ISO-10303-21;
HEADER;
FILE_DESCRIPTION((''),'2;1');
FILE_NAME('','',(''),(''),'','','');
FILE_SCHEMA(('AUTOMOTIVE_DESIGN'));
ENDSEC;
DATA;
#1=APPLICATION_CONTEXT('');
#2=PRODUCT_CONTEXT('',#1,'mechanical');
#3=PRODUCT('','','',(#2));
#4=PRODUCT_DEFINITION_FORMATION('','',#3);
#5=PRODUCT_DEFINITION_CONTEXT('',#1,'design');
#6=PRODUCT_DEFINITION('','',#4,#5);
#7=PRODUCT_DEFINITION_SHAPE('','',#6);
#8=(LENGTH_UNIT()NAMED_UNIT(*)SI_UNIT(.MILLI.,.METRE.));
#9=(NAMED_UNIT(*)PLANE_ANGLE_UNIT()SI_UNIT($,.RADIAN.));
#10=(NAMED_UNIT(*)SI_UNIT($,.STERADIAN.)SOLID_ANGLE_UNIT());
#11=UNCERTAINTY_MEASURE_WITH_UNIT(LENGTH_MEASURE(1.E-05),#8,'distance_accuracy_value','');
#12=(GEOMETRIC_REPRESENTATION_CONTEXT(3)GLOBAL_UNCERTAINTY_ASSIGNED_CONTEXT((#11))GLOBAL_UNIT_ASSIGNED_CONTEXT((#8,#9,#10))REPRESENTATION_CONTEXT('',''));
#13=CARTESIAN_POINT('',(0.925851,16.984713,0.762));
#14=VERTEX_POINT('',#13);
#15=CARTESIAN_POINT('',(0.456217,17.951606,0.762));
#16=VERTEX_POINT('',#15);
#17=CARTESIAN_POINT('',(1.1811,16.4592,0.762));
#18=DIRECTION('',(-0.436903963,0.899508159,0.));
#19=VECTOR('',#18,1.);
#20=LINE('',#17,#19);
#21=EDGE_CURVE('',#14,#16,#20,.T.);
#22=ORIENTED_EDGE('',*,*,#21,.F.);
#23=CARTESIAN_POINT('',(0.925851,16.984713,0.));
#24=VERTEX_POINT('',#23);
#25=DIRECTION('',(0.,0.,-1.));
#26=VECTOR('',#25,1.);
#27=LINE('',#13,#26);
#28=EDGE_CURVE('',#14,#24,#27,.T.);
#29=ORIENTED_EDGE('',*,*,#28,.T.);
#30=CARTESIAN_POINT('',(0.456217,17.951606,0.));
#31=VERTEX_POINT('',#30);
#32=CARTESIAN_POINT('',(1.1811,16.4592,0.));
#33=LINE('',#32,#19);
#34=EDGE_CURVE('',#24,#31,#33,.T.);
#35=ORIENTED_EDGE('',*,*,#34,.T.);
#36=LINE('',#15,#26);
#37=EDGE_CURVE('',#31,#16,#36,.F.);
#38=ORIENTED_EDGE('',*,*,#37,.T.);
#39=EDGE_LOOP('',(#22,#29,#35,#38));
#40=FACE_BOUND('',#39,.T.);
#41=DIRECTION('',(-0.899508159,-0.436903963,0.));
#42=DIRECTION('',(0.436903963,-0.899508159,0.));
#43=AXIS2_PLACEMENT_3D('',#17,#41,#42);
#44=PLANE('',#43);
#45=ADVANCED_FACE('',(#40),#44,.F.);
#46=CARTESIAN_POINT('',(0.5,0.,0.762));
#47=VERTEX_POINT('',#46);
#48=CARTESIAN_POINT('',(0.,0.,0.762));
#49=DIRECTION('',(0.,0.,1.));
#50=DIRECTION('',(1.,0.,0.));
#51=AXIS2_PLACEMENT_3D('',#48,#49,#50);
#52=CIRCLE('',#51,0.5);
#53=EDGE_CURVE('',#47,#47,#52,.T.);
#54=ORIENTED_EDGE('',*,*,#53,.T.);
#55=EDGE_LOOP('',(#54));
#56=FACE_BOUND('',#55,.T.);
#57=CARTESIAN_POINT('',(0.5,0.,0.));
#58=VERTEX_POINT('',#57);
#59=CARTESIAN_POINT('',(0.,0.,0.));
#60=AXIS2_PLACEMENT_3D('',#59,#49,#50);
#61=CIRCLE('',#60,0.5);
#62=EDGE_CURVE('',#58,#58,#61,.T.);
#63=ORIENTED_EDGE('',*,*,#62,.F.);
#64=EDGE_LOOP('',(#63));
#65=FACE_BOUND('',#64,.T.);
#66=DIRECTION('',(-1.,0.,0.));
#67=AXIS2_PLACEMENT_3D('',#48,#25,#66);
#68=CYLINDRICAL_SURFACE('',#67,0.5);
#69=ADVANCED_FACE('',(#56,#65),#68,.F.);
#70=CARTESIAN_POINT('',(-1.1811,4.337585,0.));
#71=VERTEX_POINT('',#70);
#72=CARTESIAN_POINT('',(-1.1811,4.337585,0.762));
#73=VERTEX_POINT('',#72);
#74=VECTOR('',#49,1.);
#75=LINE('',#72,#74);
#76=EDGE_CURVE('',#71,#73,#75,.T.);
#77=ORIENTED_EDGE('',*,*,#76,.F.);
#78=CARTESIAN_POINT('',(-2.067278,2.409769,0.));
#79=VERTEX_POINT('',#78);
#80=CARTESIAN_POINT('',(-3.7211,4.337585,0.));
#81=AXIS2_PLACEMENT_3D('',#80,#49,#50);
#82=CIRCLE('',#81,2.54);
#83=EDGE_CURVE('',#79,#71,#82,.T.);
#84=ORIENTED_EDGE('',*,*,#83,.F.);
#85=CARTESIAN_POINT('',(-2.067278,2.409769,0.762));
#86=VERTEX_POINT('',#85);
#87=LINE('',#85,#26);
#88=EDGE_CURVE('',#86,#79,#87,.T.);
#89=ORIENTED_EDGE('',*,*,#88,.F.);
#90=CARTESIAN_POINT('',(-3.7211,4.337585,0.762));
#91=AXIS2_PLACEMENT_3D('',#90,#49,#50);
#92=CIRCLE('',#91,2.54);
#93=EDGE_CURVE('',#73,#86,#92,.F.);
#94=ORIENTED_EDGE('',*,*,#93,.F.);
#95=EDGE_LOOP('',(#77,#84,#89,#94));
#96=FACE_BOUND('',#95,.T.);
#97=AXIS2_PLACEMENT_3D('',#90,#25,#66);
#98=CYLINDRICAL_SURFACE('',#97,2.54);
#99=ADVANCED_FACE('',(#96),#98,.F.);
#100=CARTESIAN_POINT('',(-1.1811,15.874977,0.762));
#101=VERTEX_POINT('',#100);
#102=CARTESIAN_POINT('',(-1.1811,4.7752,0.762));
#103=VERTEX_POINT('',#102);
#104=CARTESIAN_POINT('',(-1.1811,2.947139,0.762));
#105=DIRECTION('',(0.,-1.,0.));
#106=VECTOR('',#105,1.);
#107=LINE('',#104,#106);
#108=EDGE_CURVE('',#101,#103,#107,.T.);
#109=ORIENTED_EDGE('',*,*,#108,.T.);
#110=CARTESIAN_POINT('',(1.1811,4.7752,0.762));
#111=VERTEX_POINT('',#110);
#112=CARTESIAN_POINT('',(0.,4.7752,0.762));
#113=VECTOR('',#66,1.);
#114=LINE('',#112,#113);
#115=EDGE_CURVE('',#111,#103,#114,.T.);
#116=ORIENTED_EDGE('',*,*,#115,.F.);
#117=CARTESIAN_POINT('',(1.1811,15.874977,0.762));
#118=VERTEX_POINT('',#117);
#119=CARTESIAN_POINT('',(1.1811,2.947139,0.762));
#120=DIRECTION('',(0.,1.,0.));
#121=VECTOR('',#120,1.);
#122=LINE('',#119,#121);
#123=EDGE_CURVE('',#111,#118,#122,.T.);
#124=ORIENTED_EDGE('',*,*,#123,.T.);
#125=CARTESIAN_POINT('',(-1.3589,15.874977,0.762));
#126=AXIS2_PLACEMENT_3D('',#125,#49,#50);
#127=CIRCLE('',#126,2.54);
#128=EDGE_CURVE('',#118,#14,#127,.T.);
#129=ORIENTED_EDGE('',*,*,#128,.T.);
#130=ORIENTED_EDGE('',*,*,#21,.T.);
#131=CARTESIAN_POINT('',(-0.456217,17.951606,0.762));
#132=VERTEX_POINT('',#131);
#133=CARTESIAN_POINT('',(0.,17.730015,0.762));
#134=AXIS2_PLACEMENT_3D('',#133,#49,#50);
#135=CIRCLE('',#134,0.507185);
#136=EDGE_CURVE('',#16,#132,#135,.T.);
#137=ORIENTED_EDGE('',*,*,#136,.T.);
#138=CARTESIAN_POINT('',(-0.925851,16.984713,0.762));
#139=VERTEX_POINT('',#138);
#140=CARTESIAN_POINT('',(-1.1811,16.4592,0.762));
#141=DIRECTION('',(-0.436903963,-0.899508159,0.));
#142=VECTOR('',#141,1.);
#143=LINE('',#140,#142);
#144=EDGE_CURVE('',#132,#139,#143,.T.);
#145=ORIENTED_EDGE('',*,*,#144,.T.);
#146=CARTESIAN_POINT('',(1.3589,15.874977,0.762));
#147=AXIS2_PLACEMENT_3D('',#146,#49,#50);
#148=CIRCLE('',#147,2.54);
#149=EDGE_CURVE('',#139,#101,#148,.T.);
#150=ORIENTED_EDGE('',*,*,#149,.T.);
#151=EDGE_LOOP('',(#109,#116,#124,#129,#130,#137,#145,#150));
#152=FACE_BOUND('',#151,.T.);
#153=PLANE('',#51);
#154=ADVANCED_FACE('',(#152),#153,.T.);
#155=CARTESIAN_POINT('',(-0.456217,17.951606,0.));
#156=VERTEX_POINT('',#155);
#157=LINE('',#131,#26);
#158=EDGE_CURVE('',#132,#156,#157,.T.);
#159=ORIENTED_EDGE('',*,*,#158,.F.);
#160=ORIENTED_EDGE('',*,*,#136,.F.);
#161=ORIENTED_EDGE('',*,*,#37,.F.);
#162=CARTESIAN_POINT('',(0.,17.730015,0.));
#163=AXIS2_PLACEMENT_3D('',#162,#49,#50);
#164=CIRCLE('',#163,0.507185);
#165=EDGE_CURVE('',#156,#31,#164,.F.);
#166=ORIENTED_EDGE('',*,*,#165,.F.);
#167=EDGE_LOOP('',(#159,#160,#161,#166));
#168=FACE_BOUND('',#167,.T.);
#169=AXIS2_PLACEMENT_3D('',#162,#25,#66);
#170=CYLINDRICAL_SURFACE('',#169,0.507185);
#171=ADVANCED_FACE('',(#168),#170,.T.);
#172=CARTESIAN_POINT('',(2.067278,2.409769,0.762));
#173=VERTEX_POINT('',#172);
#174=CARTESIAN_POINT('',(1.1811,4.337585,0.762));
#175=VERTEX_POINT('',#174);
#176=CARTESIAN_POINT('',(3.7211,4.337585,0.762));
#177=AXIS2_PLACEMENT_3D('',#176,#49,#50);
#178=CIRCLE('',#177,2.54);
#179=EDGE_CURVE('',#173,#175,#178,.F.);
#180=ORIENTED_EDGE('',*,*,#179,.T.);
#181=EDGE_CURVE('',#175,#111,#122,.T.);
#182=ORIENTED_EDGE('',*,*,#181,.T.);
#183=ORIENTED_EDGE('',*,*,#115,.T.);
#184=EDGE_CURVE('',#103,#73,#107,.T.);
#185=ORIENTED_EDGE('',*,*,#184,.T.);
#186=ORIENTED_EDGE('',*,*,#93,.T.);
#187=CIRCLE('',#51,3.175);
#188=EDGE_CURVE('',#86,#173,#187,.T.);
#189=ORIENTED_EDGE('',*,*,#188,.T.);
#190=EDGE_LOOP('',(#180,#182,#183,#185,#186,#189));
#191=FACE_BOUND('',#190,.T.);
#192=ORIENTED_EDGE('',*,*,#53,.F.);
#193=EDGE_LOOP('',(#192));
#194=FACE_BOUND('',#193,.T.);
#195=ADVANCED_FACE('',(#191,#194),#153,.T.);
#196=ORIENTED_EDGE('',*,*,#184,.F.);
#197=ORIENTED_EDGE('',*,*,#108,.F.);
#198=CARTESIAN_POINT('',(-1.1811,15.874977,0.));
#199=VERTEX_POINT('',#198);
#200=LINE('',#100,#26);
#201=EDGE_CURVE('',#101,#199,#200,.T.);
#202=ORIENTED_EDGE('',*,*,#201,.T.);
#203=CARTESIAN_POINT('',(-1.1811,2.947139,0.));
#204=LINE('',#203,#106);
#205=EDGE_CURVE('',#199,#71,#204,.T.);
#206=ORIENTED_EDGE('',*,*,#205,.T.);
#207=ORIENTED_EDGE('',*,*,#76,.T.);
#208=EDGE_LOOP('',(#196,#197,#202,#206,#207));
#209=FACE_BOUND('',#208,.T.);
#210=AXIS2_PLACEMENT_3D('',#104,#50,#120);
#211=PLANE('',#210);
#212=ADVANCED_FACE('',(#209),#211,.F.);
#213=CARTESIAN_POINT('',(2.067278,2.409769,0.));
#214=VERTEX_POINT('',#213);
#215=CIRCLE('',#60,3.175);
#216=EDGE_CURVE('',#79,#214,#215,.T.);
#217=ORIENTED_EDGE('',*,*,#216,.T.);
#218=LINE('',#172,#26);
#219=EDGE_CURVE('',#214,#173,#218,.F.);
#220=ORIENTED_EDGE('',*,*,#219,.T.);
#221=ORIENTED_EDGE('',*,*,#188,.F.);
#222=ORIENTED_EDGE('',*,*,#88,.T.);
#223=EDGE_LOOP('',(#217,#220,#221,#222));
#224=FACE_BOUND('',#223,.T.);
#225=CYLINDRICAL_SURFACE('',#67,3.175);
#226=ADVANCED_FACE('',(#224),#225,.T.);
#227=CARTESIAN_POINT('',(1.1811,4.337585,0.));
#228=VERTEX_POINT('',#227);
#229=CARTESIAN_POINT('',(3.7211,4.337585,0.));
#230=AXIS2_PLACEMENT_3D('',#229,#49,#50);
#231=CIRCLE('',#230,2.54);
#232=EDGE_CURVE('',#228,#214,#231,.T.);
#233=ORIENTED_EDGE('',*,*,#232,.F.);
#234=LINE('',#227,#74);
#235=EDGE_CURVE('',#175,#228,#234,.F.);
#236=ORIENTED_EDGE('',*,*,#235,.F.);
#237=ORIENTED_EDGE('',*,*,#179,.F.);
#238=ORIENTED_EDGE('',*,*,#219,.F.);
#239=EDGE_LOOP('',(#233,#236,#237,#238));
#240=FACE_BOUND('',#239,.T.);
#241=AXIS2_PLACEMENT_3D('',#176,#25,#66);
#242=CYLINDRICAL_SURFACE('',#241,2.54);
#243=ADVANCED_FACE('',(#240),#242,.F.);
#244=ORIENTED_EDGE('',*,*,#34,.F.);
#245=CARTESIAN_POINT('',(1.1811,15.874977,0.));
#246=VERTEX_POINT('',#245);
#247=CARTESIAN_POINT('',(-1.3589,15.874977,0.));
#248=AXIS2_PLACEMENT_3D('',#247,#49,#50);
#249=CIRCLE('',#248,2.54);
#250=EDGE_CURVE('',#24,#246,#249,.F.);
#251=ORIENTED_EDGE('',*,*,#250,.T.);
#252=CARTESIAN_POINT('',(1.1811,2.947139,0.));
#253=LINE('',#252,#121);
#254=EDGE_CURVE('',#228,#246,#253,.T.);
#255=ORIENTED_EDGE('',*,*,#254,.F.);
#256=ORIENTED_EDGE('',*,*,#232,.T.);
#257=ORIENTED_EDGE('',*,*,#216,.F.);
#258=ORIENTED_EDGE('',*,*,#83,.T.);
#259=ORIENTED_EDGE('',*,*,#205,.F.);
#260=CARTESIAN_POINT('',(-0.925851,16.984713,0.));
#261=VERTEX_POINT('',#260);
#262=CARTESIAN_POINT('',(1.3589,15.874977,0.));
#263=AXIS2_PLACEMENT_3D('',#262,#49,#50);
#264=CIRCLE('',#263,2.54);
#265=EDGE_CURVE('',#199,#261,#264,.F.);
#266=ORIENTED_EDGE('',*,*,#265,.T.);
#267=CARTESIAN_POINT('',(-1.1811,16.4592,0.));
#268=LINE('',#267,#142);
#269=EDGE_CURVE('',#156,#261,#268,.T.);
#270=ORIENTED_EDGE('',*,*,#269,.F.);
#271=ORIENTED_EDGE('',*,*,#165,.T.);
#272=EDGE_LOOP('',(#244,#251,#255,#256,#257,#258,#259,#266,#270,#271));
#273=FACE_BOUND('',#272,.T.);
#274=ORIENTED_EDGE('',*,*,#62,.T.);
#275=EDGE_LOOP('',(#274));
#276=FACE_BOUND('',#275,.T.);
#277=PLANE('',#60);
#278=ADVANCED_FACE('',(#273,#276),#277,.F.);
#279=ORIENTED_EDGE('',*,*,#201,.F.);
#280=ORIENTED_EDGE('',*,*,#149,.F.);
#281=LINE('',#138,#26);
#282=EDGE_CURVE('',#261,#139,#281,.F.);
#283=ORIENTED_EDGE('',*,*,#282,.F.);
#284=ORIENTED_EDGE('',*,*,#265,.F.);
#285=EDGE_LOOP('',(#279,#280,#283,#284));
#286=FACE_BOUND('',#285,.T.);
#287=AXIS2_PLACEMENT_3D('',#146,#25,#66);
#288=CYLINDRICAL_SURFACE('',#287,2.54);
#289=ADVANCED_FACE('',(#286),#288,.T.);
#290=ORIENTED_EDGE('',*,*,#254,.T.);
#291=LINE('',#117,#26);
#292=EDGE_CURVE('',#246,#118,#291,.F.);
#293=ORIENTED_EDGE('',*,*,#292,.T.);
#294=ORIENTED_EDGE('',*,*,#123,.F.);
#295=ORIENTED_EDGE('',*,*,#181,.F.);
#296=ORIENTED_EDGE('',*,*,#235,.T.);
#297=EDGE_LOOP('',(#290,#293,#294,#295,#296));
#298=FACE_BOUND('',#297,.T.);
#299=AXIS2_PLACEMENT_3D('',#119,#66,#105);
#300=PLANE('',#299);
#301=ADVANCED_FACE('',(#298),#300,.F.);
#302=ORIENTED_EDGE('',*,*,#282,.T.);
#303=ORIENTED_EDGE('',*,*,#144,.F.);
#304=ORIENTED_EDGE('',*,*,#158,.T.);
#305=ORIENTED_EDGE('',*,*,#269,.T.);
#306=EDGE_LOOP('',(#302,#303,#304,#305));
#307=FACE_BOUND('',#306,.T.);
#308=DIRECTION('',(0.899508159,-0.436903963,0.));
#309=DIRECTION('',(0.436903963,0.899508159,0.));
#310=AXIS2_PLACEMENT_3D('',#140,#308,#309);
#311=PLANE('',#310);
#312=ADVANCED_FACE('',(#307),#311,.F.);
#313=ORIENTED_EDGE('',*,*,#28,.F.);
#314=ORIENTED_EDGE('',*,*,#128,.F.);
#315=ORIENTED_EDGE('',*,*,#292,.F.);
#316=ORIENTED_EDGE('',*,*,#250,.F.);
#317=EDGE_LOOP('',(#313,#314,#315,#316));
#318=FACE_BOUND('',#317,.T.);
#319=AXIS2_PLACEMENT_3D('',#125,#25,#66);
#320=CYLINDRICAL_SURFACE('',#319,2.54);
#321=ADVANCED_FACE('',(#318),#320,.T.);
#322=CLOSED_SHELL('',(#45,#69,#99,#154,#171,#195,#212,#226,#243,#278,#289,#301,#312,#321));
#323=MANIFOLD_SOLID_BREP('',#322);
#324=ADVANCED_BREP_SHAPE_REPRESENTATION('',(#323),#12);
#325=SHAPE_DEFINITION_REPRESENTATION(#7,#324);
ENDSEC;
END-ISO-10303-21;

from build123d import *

# Parameters (mm, degrees)
SKETCH1_R           = 0.5
BOSS_EXTRUDE1_DEPTH = 0.762
FILLET1_R           = 2.54
FILLET2_R           = 0.507185


with BuildPart() as part:
    # Sketch1 → Boss-Extrude1 (new body)
    with BuildSketch(Plane.XY):
        with BuildLine():
            Line((-0.3175, 18.2372), (0.3175, 18.2372))
            Line((0.3175, 18.2372), (1.1811, 16.4592))
            Line((1.1811, 16.4592), (1.1811, 2.947138916))
            ThreePointArc((1.1811, 2.947138916), (0, -3.175), (-1.1811, 2.947138916))
            Line((-1.1811, 2.947138916), (-1.1811, 16.4592))
            Line((-1.1811, 16.4592), (-0.3175, 18.2372))
        make_face()
        Circle(SKETCH1_R, mode=Mode.SUBTRACT)
    extrude(amount=BOSS_EXTRUDE1_DEPTH)

    # Fillet1
    fillet1_edges = [part.edges().sort_by_distance(p)[0] for p in [
        (1.1811, 16.4592, 0.381),
        (1.1811, 2.947138916, 0.381),
        (-1.1811, 2.947138916, 0.381),
        (-1.1811, 16.4592, 0.381),
    ]]
    fillet(fillet1_edges, radius=FILLET1_R)

    # Fillet2
    fillet2_edges = [part.edges().sort_by_distance(p)[0] for p in [
        (-0.3175, 18.2372, 0.381),
        (0.3175, 18.2372, 0.381),
    ]]
    fillet(fillet2_edges, radius=FILLET2_R - 0.0001)  # a hair under: the kernel refuses the full size


solid = part.part
